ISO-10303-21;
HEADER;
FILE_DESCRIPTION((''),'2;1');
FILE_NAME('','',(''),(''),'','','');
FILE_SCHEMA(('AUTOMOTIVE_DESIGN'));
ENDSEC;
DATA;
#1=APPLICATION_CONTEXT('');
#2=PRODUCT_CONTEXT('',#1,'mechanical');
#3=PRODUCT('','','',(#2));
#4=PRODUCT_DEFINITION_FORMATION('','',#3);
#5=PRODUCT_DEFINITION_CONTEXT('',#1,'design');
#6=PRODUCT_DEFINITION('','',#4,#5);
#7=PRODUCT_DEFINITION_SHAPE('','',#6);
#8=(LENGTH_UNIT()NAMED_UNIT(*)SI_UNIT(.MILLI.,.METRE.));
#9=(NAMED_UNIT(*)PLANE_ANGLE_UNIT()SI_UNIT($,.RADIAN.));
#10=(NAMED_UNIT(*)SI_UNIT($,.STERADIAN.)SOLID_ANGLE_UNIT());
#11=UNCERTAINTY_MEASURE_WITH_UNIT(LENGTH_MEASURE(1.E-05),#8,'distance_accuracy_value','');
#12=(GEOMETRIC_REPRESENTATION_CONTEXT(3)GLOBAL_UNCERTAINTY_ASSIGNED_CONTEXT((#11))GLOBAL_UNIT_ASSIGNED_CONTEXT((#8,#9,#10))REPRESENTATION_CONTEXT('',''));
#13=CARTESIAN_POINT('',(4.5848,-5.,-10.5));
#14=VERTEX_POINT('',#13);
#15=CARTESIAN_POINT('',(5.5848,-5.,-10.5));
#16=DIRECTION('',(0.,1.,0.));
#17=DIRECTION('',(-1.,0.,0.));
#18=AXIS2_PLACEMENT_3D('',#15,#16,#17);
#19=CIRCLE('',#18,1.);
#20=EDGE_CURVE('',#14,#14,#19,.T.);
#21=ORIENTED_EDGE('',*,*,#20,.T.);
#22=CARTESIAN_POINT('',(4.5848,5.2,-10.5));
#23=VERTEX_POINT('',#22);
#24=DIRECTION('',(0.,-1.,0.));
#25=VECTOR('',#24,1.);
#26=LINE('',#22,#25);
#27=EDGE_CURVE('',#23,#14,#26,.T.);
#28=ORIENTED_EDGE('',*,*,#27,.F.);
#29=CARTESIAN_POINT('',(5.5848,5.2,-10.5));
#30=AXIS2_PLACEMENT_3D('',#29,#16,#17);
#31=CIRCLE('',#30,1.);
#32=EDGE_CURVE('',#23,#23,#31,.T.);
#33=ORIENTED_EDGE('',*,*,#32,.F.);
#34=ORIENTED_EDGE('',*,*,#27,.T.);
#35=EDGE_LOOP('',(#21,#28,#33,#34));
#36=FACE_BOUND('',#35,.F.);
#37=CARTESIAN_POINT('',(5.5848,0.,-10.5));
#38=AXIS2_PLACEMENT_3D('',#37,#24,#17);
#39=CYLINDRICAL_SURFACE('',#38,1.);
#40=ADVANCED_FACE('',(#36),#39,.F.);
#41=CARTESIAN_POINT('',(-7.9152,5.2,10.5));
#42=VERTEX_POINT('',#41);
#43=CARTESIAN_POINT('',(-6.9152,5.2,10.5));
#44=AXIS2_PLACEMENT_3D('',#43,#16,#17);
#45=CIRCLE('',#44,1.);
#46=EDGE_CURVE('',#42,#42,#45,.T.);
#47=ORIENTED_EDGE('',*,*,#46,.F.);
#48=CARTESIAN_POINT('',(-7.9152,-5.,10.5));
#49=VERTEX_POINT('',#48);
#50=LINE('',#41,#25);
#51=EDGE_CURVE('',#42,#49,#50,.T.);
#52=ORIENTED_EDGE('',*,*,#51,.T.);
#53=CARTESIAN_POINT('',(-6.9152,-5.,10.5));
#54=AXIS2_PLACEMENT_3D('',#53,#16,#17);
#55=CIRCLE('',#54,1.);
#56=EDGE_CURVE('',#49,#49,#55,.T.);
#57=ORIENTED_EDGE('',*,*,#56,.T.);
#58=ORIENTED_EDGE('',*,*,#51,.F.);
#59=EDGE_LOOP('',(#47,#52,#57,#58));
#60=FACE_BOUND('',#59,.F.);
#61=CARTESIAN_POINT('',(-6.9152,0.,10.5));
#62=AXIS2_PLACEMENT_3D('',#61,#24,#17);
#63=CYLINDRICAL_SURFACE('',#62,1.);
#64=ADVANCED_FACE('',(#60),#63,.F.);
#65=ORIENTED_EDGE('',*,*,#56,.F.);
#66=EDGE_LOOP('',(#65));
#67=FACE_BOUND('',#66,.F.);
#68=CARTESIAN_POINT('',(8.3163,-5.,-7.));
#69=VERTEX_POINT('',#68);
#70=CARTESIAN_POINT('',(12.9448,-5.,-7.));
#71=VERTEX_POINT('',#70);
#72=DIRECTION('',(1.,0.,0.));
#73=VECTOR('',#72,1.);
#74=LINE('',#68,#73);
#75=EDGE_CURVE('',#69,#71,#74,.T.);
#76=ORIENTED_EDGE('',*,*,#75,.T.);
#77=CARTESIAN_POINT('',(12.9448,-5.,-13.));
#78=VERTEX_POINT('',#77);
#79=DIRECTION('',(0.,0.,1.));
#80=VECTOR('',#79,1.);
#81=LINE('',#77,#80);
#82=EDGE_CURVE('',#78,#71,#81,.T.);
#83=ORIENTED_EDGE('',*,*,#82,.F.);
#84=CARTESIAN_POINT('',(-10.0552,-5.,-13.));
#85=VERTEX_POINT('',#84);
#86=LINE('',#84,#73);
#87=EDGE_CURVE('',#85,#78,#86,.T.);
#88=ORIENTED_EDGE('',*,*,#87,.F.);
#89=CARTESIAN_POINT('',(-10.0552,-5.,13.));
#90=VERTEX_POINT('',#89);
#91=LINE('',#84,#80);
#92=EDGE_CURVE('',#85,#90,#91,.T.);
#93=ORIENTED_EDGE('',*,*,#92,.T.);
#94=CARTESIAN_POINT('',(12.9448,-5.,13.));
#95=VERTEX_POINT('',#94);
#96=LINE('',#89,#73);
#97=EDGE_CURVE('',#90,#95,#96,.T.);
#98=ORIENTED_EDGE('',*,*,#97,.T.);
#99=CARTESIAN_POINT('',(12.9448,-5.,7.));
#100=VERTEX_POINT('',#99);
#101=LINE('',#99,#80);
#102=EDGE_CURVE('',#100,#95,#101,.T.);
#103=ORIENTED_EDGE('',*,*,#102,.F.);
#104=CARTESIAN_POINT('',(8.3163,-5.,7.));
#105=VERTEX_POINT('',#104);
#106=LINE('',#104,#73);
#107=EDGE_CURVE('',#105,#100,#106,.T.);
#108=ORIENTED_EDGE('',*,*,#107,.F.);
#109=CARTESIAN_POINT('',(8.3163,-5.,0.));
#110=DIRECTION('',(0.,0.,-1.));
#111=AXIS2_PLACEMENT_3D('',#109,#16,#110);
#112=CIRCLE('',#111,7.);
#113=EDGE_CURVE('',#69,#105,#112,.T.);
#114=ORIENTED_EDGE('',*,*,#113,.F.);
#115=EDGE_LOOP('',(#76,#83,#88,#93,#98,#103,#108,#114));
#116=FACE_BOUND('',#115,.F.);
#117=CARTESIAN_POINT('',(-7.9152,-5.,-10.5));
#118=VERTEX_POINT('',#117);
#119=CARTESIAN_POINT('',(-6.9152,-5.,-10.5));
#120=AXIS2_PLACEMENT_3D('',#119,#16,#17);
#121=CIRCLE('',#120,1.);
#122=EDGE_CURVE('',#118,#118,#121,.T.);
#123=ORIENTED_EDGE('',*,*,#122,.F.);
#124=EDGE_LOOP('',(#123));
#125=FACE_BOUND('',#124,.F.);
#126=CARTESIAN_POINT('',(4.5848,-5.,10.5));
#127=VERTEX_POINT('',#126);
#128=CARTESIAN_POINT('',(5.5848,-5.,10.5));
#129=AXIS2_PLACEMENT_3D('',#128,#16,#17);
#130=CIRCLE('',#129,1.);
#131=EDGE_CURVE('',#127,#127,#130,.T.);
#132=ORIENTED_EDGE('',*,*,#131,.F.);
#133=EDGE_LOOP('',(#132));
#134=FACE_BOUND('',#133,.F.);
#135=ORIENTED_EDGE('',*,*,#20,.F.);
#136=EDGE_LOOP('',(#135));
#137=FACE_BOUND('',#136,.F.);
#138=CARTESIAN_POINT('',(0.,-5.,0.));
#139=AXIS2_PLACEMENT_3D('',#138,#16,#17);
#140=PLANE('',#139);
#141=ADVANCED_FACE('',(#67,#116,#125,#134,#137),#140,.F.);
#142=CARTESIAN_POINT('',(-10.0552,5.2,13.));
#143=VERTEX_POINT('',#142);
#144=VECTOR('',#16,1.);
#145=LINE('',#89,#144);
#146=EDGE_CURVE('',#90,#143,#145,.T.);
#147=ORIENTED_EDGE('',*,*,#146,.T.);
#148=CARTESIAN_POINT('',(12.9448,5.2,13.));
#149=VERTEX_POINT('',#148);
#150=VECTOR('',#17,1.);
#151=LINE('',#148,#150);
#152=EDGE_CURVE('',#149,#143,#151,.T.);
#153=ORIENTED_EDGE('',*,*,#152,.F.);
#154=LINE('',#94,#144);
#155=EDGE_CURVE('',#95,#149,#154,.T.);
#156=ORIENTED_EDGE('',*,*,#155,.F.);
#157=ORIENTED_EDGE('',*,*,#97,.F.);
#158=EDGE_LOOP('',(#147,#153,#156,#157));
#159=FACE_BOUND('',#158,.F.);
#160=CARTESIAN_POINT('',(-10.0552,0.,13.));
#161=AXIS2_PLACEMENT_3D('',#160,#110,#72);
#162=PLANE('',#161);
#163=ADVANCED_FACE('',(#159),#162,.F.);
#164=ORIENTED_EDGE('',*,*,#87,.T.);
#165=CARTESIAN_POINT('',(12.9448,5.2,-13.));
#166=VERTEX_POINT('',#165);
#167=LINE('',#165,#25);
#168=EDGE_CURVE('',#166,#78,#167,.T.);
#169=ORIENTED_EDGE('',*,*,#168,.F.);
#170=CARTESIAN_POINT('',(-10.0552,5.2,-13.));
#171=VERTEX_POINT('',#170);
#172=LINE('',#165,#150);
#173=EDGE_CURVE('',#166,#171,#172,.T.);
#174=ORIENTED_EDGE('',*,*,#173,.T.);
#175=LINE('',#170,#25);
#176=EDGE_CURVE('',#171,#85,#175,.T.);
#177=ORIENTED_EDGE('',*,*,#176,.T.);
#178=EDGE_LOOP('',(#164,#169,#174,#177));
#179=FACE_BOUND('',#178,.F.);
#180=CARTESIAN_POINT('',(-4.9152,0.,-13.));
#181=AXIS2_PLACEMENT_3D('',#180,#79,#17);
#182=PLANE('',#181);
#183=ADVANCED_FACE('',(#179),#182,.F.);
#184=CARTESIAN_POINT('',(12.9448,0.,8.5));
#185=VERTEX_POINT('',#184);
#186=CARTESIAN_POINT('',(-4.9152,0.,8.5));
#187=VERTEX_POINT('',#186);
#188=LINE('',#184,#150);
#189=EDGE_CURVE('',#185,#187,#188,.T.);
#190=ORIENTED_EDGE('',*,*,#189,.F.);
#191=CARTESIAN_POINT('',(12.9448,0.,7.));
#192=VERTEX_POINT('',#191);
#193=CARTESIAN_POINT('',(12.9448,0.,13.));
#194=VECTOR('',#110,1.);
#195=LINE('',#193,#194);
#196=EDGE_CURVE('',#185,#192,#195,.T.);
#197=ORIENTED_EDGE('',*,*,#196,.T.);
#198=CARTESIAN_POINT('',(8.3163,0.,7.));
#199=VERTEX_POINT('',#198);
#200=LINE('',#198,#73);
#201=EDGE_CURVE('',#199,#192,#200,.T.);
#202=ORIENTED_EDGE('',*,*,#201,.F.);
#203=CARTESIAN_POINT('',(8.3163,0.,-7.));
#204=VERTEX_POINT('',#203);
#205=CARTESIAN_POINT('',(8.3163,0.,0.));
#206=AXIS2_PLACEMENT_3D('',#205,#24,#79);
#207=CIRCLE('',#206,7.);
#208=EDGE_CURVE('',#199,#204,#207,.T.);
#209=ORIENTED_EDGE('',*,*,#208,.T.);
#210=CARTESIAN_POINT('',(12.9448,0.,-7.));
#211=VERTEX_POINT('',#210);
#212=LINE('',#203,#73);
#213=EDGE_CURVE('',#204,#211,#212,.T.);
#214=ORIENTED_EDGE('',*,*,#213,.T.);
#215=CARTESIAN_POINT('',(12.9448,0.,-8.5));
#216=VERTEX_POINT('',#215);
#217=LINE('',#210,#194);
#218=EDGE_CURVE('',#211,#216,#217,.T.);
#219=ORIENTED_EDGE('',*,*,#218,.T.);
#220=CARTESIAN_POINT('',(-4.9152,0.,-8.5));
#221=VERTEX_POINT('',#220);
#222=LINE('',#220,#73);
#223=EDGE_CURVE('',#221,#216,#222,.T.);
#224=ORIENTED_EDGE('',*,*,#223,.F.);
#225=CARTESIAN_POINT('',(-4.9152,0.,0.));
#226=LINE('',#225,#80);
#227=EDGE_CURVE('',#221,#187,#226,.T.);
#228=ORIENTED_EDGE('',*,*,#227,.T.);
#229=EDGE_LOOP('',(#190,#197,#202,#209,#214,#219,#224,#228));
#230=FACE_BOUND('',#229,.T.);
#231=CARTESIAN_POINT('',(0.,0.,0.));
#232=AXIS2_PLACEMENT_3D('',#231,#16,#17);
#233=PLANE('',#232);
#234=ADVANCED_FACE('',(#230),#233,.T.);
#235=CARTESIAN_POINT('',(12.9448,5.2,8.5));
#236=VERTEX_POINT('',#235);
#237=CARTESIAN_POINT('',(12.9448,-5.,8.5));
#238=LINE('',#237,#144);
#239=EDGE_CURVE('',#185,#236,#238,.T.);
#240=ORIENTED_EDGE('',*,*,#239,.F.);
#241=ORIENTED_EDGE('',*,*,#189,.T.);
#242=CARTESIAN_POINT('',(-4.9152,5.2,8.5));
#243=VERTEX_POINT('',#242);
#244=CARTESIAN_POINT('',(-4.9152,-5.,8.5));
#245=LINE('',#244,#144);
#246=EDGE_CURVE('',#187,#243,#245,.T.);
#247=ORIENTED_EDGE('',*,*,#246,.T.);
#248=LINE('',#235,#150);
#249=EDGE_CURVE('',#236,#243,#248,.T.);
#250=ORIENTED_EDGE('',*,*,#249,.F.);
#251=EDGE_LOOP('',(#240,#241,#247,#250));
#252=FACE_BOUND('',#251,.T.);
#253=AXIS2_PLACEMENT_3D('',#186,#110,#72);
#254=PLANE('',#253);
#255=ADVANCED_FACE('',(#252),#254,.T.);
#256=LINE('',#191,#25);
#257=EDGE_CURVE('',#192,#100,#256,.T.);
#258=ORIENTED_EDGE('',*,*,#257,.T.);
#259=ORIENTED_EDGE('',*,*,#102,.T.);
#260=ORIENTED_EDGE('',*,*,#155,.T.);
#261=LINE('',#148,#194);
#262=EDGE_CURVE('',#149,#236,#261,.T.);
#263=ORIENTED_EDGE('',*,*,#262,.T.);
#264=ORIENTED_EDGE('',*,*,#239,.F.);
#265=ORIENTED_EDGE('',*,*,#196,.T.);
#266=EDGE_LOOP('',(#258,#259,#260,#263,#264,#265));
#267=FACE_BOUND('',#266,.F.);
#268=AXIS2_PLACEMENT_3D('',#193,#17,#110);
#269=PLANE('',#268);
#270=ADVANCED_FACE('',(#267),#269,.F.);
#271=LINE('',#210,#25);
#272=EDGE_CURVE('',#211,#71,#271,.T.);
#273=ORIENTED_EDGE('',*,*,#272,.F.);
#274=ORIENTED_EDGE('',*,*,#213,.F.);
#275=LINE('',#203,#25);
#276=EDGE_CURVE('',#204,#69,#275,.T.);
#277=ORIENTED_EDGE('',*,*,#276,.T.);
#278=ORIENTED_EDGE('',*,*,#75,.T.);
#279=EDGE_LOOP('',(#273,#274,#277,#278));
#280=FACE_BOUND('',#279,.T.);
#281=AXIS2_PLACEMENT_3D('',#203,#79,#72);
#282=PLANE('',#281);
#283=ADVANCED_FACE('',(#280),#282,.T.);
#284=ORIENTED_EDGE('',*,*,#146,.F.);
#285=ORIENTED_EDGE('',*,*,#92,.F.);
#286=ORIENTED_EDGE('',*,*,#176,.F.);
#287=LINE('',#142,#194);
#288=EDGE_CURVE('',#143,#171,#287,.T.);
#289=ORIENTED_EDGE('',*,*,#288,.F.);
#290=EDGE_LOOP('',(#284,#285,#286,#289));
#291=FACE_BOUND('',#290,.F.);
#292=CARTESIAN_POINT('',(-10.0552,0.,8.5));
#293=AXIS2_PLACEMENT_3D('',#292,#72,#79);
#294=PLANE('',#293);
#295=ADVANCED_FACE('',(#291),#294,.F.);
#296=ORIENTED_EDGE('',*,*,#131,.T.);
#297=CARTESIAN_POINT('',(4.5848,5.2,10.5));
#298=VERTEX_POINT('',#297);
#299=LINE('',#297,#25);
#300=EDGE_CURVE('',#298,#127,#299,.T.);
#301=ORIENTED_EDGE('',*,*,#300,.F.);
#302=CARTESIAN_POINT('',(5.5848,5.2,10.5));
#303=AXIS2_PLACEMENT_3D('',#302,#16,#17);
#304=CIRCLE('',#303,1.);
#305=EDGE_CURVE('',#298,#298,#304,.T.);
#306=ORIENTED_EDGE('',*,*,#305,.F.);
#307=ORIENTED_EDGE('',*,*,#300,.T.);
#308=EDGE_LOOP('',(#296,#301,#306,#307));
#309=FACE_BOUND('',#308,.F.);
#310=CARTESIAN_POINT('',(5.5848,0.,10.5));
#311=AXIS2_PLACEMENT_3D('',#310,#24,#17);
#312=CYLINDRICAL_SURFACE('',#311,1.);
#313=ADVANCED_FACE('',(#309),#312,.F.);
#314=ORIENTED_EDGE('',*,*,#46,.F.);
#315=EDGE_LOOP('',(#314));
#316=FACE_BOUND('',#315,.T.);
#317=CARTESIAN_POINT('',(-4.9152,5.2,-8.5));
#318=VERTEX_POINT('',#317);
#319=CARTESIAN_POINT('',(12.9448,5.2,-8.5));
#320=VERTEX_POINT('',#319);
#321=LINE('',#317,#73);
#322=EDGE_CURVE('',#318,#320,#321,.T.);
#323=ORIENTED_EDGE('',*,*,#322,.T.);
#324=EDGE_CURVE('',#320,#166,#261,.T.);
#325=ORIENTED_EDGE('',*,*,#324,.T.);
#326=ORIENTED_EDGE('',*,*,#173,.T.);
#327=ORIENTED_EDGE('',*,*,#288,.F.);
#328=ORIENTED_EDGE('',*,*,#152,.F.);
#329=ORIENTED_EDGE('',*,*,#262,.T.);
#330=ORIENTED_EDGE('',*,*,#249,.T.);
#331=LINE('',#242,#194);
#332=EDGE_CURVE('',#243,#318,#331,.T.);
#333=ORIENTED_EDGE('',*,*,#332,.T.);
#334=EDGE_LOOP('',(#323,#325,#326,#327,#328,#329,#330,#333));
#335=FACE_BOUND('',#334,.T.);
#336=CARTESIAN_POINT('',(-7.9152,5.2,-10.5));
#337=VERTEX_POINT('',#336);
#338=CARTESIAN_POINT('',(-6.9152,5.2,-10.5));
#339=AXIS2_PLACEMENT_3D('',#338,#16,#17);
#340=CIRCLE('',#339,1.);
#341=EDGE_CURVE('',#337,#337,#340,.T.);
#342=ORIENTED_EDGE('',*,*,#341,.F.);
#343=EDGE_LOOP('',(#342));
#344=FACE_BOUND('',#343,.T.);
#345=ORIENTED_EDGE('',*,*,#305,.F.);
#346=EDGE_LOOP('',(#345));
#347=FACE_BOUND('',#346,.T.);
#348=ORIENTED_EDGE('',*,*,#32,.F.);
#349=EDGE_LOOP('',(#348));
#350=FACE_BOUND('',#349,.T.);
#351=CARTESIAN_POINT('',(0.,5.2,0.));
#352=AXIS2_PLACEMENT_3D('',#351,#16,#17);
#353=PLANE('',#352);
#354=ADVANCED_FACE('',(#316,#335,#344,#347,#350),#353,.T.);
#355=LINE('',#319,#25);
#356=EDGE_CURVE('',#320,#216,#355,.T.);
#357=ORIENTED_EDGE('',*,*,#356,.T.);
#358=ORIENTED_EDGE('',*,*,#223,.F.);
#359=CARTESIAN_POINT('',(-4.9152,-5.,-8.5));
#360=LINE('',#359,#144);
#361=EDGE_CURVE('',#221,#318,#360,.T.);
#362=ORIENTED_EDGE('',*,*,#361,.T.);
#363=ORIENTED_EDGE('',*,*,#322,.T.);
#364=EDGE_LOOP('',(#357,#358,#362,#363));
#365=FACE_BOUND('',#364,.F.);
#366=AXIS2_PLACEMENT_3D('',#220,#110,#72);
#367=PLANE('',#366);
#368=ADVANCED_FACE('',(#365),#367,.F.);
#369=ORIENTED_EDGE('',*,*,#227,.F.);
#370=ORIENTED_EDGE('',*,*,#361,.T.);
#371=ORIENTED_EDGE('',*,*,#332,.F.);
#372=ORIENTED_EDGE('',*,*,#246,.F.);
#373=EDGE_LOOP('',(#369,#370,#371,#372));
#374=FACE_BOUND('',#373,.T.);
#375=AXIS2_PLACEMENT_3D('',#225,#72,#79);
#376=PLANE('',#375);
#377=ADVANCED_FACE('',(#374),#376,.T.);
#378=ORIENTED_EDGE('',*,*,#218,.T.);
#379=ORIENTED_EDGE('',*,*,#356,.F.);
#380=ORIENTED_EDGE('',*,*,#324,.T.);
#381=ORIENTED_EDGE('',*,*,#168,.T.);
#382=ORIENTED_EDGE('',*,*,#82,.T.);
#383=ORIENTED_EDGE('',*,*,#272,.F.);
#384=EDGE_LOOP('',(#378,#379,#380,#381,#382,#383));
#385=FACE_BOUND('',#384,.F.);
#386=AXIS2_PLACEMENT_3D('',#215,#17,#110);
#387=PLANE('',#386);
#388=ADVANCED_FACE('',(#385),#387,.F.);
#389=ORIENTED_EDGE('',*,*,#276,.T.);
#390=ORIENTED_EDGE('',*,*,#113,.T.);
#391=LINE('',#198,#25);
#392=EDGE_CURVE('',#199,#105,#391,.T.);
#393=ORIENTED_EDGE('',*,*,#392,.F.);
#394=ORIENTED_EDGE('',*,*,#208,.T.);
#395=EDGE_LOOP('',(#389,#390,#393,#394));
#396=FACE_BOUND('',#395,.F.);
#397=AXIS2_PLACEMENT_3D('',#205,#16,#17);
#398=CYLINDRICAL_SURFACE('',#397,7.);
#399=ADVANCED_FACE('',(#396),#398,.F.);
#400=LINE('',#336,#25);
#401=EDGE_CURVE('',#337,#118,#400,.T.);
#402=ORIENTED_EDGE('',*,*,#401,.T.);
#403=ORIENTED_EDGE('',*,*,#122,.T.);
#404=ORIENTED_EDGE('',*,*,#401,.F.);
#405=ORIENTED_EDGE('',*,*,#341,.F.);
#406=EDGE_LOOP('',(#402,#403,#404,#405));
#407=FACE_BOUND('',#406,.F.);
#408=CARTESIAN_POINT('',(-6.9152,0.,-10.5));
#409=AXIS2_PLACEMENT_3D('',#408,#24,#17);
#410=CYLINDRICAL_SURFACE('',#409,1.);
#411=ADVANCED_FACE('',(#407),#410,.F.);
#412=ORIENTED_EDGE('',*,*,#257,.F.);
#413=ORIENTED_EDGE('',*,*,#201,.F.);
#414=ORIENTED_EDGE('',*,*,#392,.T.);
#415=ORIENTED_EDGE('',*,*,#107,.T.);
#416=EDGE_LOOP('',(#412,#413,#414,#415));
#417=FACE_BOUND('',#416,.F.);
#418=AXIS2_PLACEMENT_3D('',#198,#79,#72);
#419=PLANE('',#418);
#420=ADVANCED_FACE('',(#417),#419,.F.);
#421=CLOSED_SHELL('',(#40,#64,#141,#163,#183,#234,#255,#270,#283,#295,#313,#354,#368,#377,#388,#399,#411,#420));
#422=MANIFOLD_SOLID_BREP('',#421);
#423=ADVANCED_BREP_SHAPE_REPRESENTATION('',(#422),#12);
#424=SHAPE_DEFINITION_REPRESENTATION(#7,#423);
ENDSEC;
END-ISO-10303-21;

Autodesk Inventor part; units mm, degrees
ref_plane "YZ Plane" through (0, 0, 0) normal (1, 0, 0) x (0, 1, 0)
ref_plane "XZ Plane" through (0, 0, 0) normal (0, 1, 0) x (-1, 0, 0)
ref_plane "XY Plane" through (0, 0, 0) normal (0, 0, 1) x (1, 0, 0)
sketch "スケッチ1" plane through (0, 0, 0) normal (0, 1, 0) x (-1, 0, 0)
  line L0 (10.0552, 13) -> (-14.9448, 13)
  line L1 (-14.9448, 13) -> (-14.9448, -13)
  line L2 (-14.9448, -13) -> (10.0552, -13)
  line L3 (10.0552, -13) -> (10.0552, 13)
  line L4 (10.0552, 0) -> (-14.9448, 0)
  circle A0 centre (6.9152, 10.5) radius 1
  circle A1 centre (6.9152, 10.5) radius 2
  circle A2 centre (-5.5848, 10.5) radius 2
  circle A3 centre (-5.5848, 10.5) radius 1
  circle A4 centre (6.9152, -10.5) radius 2
  circle A5 centre (6.9152, -10.5) radius 1
  circle A6 centre (-5.5848, -10.5) radius 2
  circle A7 centre (-5.5848, -10.5) radius 1
  circle A8 centre (-8.3163, 0) radius 7
  line L5 (-8.3163, 7) -> (-14.9448, 7)
  line L6 (-8.3163, -7) -> (-14.9448, -7)
  line L7 (10.0552, 8.5) -> (-14.9448, 8.5)
  line L8 (4.9152, -13) -> (4.9152, 13)
  line L9 (10.0552, -8.5) -> (-14.9448, -8.5)
  line L10 (-12.9448, 13) -> (-12.9448, -13)
  point P0 (0, 0)
  point P1 (4.9152, 8.5)
  point P2 (4.9152, -8.5)
  point P3 (-5.5848, -8.5)
  point P4 (-5.5848, 8.5)
  point P5 (-12.9448, -8.5)
  point P6 (-12.9448, 8.5)
  point P7 (-12.9448, 7)
  point P8 (-12.9448, -7)
  dimension "d0" = 26
  dimension "d1" = 25
  dimension "d2" = 2
  dimension "d3" = 2.5
  dimension "d4" = 3.14
  dimension "d8" = 12.5
  dimension "d11" = 21
  dimension "d14" = 14
  dimension "d22" = 18.5
  dimension "d23" = 2
extrude "押し出し1" add sketch "スケッチ1" along normal blind 5.2 and the other way blind 5 contours L3 L7 A1 L8 L0 | A2 | L8 L7 L10 L0 | L3 L4 L8 L7 | A1 | A1 L7 L8 | L3 L9 L8 L4 | L3 L2 L8 A4 L9 | A4 | A4 L8 L9 | A6 | L8 L2 L10 L9
extrude "押し出し2" add sketch "スケッチ1" against normal blind 5 contours L3 L7 A1 L8 L0 | L8 L7 L10 L0 | L3 L4 L8 L7 | A1 L7 L8 | L3 L9 L8 L4 | L7 L8 L4 A8 L5 L10 | L3 L2 L8 A4 L9 | L8 L9 L10 L6 A8 L4 | A4 L8 L9 | L8 L2 L10 L9
